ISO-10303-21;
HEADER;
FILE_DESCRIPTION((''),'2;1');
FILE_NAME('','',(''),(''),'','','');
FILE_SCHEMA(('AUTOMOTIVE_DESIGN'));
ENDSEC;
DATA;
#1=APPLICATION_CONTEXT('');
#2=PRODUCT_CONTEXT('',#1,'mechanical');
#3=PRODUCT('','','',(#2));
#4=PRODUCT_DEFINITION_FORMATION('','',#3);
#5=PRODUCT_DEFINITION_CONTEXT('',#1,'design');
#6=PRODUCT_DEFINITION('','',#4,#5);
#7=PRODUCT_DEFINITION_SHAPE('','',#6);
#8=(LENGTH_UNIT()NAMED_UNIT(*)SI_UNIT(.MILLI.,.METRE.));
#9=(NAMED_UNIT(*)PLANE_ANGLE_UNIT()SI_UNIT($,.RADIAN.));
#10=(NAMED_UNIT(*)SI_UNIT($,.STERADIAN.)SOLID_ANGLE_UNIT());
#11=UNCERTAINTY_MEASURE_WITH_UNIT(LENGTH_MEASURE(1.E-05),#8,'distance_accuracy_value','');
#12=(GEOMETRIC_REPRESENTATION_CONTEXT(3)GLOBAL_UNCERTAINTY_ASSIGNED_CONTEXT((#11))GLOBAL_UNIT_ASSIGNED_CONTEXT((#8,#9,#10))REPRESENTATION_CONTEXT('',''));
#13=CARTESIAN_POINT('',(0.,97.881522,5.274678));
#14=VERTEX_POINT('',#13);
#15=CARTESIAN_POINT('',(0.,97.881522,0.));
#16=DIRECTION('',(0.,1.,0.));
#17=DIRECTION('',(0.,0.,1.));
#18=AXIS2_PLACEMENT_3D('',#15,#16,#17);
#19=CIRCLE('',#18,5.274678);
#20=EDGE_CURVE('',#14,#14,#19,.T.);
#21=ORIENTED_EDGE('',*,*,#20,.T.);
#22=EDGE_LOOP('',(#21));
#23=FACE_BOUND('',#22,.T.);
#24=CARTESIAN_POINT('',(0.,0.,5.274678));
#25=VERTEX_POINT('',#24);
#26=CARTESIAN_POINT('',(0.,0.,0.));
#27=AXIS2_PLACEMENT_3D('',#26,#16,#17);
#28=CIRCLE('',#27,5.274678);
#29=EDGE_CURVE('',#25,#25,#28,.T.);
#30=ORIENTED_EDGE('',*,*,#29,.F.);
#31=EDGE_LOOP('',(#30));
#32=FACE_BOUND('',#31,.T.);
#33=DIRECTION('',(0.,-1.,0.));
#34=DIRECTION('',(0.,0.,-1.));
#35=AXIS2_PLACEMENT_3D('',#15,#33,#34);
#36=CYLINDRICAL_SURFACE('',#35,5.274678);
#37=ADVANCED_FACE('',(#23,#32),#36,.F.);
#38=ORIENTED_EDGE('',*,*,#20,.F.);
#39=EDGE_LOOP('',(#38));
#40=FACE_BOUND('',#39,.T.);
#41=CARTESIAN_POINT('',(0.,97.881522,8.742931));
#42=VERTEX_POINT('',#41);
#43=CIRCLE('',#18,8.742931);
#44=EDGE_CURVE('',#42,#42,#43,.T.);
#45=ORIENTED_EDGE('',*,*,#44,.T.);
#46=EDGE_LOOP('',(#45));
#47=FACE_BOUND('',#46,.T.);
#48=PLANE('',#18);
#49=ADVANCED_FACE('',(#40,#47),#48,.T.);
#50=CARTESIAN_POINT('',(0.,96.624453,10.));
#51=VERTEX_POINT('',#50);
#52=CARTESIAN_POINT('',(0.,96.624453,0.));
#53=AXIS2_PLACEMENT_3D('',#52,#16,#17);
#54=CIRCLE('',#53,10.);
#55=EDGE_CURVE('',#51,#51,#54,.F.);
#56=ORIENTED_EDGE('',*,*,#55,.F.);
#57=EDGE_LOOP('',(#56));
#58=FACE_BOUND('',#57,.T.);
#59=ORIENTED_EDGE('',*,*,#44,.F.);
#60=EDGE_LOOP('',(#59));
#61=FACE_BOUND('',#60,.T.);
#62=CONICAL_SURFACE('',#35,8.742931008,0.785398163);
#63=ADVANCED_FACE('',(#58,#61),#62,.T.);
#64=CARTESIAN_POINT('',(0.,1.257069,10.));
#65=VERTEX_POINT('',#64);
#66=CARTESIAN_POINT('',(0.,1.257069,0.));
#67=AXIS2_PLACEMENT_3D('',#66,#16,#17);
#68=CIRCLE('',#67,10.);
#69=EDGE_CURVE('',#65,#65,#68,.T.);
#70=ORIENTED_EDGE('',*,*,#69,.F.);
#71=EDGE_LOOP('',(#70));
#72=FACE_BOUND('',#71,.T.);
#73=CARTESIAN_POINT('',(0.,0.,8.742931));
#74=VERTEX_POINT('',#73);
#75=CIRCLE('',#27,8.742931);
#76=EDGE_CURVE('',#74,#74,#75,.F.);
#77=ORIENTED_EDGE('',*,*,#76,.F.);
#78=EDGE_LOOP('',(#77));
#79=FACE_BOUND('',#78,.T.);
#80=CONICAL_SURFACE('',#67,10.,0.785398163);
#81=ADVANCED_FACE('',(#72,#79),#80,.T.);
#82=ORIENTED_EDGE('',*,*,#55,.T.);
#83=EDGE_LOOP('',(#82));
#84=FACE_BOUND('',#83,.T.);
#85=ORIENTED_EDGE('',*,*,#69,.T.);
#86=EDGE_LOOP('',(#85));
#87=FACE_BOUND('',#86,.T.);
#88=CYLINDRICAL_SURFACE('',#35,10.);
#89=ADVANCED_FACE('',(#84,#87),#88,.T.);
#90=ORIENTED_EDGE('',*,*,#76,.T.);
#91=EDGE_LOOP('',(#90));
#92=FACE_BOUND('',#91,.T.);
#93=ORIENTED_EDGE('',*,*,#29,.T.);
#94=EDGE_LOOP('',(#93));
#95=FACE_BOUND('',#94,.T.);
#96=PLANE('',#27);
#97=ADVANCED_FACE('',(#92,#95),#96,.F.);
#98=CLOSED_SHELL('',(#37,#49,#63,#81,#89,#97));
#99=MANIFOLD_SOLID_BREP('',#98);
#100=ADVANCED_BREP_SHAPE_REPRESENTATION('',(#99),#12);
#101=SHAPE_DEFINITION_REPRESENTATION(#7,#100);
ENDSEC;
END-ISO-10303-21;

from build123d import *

# Parameters (mm, degrees)
SKETCH1_R           = 10
BOSS_EXTRUDE1_DEPTH = 97.881521679
SKETCH2_R           = 5.274678352
CUT_EXTRUDE1_DEPTH  = 99.897888179
CHAMFER1_SIZE       = 1.257068992


with BuildPart() as part:
    # Sketch1 → Boss-Extrude1 (new body)
    with BuildSketch(Plane(origin=(0, 0, 0), x_dir=(1, 0, 0), z_dir=(0, 1, 0))):
        Circle(SKETCH1_R)
    extrude(amount=BOSS_EXTRUDE1_DEPTH)

    # Sketch2 → Cut-Extrude1 (cut, through all)
    with BuildSketch(Plane(origin=(0, 0, 0), x_dir=(1, 0, 0), z_dir=(0, 1, 0))):
        Circle(SKETCH2_R)
    extrude(amount=CUT_EXTRUDE1_DEPTH, mode=Mode.SUBTRACT)

    # Chamfer1
    chamfer1_edges = [part.edges().sort_by_distance(p)[0] for p in [
        (-10, 97.881521679, 0),
        (-10, 0, 0),
    ]]
    chamfer(chamfer1_edges, length=CHAMFER1_SIZE)


solid = part.part
